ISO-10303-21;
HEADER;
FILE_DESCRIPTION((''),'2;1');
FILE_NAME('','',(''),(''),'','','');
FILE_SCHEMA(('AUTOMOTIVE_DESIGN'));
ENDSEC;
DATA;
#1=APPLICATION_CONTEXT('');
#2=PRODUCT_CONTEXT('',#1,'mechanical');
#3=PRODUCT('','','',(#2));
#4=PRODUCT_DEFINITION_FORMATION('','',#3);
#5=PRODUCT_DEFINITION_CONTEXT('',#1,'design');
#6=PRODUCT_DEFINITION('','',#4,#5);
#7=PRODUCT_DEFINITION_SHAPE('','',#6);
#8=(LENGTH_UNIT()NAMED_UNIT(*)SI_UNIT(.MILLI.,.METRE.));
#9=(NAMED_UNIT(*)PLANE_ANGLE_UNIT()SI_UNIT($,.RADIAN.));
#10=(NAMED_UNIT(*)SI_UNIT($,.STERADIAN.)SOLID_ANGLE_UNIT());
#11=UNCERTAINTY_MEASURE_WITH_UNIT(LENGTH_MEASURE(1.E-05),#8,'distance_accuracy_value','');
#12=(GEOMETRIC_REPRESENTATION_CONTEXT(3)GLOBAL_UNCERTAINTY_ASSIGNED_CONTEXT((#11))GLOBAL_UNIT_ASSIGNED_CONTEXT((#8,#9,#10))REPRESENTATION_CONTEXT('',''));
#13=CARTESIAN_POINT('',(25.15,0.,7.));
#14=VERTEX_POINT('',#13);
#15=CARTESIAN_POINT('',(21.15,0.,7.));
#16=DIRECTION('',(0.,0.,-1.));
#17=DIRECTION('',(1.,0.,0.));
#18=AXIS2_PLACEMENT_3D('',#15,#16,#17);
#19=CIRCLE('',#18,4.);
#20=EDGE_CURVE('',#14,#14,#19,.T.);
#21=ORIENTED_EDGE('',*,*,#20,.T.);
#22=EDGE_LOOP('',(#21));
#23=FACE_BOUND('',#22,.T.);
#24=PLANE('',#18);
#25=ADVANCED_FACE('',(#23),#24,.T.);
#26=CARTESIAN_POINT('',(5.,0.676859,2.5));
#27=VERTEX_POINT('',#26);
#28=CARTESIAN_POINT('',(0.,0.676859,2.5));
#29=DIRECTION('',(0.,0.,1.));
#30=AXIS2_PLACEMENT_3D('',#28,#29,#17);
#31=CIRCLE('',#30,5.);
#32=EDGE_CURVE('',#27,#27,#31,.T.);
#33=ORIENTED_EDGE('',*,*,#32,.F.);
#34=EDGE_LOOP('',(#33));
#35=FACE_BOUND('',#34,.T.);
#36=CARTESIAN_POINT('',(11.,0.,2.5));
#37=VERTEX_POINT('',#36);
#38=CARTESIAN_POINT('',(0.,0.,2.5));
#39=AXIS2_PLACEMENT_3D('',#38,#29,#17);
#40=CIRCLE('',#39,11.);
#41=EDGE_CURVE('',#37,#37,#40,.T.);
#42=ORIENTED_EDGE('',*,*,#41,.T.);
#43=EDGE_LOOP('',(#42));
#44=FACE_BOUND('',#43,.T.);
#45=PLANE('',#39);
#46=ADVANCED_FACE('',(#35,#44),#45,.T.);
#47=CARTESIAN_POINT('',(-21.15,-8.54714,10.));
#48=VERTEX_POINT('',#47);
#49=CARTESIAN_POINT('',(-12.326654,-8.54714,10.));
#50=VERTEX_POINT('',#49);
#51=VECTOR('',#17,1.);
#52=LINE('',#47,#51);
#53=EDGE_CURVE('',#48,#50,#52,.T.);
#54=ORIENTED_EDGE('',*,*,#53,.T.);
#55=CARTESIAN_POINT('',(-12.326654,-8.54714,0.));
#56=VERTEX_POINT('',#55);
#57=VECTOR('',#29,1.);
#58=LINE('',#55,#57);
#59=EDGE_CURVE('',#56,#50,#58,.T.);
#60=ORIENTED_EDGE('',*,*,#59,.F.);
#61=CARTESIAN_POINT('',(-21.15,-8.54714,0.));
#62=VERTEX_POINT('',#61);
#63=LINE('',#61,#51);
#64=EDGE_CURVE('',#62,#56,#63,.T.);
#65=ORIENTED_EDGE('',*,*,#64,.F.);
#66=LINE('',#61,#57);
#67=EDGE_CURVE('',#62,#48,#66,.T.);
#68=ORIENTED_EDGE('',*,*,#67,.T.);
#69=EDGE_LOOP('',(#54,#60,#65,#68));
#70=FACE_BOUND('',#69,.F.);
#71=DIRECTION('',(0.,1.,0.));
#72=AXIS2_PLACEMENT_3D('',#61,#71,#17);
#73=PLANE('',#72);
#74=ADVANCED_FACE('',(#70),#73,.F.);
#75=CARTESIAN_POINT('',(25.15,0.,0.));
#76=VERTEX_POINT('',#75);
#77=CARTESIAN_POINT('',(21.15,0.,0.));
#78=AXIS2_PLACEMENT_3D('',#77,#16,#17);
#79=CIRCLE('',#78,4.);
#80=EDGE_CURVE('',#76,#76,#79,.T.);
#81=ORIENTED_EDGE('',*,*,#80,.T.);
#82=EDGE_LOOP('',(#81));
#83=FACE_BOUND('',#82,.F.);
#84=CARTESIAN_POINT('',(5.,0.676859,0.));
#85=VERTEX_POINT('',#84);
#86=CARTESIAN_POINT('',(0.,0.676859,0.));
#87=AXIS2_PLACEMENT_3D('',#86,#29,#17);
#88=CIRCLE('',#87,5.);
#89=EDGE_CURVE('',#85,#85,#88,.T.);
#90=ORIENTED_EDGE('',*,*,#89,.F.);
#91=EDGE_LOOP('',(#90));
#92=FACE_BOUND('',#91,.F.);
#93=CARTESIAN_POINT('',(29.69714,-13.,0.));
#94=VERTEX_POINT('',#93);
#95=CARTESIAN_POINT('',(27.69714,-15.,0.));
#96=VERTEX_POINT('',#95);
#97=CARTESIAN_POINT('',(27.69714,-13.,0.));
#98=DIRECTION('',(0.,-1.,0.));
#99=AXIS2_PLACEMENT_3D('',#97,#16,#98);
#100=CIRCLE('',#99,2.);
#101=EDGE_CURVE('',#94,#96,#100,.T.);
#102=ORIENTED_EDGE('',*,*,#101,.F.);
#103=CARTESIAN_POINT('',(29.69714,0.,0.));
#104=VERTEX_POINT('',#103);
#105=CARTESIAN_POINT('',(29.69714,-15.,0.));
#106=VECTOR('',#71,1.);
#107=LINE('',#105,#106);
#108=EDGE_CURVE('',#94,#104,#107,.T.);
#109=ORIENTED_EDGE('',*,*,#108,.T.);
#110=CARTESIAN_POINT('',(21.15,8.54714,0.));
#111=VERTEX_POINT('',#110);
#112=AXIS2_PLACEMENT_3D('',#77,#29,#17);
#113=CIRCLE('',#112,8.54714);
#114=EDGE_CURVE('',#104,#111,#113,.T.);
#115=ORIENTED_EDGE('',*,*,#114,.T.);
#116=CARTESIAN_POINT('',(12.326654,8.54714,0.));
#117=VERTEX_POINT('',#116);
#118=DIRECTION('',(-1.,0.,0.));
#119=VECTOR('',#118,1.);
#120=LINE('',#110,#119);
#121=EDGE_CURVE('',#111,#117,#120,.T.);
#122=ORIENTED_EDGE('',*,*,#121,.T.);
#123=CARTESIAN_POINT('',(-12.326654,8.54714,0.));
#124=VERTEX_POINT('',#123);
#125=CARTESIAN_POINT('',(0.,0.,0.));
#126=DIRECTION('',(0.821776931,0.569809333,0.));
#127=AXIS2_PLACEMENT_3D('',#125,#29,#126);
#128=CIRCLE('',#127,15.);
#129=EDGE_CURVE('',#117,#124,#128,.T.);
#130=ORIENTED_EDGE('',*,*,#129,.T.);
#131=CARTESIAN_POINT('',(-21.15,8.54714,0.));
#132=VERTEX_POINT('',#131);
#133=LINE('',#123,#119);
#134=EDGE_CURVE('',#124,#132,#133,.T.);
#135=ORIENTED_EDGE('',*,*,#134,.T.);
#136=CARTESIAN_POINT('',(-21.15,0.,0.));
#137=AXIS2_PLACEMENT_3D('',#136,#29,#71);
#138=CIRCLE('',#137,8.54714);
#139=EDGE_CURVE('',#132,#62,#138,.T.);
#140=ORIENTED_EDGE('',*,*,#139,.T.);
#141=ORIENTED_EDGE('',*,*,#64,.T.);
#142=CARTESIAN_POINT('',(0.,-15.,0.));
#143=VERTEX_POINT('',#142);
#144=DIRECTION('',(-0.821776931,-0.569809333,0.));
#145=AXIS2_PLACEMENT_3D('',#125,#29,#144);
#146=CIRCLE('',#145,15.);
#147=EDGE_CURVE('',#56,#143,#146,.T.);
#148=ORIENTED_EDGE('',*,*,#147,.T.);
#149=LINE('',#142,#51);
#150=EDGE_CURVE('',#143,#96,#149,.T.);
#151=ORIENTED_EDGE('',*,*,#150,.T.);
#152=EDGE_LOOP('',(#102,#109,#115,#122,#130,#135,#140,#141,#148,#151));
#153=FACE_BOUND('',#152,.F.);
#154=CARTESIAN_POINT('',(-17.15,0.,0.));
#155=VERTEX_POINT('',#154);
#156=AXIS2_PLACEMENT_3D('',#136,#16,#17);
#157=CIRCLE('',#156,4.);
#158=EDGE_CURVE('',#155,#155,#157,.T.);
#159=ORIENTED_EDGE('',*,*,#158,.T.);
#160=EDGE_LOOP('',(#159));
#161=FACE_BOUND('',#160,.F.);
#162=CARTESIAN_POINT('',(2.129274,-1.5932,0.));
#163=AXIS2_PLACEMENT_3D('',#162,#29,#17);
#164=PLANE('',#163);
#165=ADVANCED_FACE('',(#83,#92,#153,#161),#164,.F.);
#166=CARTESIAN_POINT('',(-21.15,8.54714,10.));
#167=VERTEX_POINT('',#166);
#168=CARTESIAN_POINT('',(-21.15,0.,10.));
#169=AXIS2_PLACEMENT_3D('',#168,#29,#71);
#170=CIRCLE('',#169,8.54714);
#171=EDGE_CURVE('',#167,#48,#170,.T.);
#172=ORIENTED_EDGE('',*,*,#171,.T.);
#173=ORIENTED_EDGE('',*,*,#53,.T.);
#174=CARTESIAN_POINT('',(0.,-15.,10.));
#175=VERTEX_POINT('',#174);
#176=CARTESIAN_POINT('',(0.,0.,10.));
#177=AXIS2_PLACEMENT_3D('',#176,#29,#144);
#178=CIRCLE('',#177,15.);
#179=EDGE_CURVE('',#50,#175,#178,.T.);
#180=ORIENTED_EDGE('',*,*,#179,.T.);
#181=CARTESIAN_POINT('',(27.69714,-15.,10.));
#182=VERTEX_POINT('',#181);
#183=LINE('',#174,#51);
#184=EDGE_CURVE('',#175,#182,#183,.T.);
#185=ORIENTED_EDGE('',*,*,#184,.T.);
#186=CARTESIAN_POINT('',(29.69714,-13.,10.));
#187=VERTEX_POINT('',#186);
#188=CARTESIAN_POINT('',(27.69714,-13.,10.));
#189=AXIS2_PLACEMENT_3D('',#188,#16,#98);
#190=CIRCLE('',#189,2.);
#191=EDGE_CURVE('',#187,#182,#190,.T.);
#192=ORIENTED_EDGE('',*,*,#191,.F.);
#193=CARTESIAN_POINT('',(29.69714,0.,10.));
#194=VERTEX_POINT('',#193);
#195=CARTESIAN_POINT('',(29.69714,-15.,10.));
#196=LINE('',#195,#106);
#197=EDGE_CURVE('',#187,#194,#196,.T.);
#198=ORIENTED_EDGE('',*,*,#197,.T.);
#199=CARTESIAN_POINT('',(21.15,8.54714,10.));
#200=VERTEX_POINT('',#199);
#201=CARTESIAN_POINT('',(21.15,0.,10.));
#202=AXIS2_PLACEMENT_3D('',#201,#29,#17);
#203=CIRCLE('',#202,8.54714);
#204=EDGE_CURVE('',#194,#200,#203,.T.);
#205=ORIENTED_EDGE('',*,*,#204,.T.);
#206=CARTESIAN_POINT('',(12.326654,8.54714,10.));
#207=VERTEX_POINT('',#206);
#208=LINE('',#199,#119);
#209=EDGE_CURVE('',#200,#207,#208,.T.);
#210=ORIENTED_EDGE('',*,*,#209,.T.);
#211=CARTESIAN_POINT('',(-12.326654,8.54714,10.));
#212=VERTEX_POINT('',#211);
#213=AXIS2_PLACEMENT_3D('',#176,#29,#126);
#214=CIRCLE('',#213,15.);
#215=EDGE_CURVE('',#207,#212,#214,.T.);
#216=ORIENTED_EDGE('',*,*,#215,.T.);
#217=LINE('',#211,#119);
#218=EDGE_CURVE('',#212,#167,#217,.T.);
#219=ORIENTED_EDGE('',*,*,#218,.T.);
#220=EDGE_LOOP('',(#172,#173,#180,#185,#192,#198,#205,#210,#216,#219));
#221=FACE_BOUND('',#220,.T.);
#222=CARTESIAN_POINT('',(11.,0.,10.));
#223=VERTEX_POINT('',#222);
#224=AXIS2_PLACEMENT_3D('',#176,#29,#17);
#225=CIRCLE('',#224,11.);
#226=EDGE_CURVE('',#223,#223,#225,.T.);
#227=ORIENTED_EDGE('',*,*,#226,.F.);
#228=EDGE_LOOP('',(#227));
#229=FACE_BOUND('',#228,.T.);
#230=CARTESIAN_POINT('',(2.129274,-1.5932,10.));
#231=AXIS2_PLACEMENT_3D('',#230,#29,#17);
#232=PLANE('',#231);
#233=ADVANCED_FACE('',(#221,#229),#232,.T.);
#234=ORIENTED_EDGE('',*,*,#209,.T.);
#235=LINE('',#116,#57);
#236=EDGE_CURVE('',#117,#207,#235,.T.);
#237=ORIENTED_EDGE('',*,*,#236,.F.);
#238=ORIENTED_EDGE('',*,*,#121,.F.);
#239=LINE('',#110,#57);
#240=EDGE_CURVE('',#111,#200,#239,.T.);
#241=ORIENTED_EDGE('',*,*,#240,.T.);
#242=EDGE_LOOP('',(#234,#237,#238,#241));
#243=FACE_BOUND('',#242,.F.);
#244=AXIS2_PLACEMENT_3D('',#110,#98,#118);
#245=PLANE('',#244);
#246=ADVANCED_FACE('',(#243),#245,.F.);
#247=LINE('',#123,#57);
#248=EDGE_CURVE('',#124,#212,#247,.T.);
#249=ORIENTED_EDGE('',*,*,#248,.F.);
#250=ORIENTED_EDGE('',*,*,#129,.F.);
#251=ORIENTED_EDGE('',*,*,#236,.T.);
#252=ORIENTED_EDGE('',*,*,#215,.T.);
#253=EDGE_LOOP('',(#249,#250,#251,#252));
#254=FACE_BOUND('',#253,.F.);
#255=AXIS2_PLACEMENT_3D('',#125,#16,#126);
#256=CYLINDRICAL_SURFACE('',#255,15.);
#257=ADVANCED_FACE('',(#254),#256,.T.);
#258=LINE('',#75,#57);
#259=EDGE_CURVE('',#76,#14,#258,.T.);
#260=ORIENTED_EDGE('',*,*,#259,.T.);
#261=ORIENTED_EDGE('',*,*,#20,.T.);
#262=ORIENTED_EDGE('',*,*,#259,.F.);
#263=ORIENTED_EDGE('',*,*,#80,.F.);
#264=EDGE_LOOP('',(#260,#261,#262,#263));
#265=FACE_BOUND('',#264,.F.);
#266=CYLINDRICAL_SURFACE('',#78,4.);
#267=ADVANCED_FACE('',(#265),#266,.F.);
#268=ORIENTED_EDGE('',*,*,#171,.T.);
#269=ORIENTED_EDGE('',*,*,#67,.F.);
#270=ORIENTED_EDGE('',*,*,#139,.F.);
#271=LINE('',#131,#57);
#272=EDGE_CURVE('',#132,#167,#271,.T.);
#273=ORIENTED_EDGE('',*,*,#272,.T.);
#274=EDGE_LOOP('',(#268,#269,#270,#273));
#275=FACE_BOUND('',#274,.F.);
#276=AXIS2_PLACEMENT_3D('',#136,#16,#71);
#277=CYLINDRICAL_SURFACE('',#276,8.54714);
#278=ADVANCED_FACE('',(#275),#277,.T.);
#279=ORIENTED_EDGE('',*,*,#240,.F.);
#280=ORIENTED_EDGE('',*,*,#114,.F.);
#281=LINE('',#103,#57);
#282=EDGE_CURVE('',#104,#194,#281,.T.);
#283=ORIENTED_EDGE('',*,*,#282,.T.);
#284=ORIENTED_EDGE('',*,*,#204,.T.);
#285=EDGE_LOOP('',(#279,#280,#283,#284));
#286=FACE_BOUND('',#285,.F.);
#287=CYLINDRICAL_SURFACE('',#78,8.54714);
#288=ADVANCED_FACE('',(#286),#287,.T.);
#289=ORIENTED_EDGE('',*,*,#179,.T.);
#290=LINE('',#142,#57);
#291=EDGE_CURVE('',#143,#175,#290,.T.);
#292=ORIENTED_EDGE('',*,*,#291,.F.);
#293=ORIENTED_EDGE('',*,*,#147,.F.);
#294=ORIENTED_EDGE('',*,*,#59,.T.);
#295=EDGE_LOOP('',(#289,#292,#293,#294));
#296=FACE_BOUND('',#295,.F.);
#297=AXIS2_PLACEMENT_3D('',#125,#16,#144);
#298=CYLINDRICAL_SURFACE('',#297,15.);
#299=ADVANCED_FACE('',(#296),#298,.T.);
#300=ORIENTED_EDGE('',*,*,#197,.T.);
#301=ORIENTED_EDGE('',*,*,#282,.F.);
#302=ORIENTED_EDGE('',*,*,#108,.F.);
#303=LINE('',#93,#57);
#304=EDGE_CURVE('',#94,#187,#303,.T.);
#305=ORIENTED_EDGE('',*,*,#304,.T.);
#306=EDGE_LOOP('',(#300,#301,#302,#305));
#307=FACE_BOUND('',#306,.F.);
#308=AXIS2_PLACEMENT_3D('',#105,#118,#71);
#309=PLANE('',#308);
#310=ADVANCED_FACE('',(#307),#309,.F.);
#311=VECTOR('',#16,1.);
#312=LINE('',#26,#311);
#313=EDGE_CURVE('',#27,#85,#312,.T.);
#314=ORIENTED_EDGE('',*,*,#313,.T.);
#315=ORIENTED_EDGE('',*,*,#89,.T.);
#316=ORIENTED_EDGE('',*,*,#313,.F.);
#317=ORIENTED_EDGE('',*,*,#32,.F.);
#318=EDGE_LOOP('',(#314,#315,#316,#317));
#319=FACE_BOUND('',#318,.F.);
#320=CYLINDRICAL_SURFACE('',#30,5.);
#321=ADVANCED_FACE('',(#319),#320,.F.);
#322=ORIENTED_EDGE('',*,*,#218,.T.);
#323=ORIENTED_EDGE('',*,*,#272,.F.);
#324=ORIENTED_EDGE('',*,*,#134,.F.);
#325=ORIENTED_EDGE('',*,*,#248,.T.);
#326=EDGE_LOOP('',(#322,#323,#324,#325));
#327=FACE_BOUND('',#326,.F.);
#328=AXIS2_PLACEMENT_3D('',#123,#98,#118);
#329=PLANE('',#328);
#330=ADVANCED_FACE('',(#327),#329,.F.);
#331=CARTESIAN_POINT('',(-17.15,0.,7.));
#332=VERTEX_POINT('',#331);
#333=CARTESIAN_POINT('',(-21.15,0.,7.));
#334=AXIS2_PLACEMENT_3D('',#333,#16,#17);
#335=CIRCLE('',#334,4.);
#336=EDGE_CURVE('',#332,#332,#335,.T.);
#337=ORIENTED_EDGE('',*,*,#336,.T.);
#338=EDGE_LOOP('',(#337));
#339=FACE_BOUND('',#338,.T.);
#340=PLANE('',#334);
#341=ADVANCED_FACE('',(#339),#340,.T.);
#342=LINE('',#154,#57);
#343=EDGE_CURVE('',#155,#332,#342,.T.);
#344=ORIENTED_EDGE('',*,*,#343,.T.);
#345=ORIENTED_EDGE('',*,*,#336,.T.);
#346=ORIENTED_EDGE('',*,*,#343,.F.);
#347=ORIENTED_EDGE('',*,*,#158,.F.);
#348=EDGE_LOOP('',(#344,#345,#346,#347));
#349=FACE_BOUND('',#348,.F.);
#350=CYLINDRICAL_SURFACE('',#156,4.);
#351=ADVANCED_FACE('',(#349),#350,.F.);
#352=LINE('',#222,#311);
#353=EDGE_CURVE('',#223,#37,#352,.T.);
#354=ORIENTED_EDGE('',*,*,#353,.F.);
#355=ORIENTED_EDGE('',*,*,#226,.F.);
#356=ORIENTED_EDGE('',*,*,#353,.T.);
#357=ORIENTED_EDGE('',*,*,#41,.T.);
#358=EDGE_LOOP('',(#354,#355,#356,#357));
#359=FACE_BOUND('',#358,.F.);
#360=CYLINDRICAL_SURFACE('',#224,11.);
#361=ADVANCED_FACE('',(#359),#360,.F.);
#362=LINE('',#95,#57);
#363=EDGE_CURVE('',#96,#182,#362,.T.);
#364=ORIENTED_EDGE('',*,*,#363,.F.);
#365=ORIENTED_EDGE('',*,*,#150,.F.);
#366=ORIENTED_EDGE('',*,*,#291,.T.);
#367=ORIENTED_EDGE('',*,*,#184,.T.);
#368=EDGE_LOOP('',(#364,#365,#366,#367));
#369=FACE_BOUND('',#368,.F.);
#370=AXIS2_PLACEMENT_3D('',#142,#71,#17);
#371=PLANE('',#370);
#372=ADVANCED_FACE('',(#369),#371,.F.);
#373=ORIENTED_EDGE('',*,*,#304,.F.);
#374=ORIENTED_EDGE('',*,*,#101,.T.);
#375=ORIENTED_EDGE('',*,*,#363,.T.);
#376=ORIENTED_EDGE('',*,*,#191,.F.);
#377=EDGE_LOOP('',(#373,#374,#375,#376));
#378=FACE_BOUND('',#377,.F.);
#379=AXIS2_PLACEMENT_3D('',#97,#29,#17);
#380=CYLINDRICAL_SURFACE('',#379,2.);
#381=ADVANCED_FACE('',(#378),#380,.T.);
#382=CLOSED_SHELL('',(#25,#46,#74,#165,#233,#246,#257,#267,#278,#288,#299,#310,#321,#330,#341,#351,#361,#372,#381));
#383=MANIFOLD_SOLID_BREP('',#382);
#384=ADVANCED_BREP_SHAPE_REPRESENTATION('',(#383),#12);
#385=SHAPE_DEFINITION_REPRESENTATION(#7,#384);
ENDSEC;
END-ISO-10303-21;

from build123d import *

# Parameters (mm, degrees)
F1_DEPTH = 10
F2_R     = 11
F3_DEPTH = 7.5
F4_R     = 4
F5_DEPTH = 7
F6_R     = 5
F7_DEPTH = 25
F8_R     = 2


# Not quite as in the source:
# - a feature names something its author has since deleted; it is built from what else it names


with BuildPart() as f1:
    # F0 (on Top) → F1 (new body)
    with BuildSketch(Plane.XY):
        with BuildLine():
            Line((29.69714, -15), (29.69714, 0))
            ThreePointArc((29.69714, 0), (27.1937406538, 6.0437406538), (21.15, 8.54714))
            Line((21.15, 8.54714), (12.3266539588, 8.54714))
            ThreePointArc((12.3266539588, 8.54714), (0, 15), (-12.3266539588, 8.54714))
            Line((-12.3266539588, 8.54714), (-21.15, 8.54714))
            ThreePointArc((-21.15, 8.54714), (-29.69714, 0), (-21.15, -8.54714))
            Line((-21.15, -8.54714), (-12.3266539588, -8.54714))
            ThreePointArc((-12.3266539588, -8.54714), (-6.9567557094, -13.2892268398), (0, -15))
            Line((0, -15), (29.69714, -15))
        make_face()
    extrude(amount=F1_DEPTH)

    # F2 (on face) → F3 (cut)
    with BuildSketch(Plane.XY.offset(10)):
        Circle(F2_R)
    extrude(amount=-F3_DEPTH, mode=Mode.SUBTRACT)

    # F4 (on face) → F5 (cut)
    with BuildSketch(Plane(origin=(0, 0, 0), x_dir=(1, 0, 0), z_dir=(0, 0, -1))):
        with Locations((-21.15, 0)):
            Circle(F4_R)
        with Locations((21.15, 0)):
            Circle(F4_R)
    extrude(amount=-F5_DEPTH, mode=Mode.SUBTRACT)

    # F6 (on face) → F7 (cut)
    with BuildSketch(Plane.XY.offset(2.5)):
        with Locations((0, 0.6768586167)):
            Circle(F6_R)
    extrude(amount=-F7_DEPTH, mode=Mode.SUBTRACT)

    # F8
    f8_edges = [f1.edges().sort_by_distance(p)[0] for p in [
        (29.69714, -15, 5),
    ]]
    fillet(f8_edges, radius=F8_R)


solid = f1.part
